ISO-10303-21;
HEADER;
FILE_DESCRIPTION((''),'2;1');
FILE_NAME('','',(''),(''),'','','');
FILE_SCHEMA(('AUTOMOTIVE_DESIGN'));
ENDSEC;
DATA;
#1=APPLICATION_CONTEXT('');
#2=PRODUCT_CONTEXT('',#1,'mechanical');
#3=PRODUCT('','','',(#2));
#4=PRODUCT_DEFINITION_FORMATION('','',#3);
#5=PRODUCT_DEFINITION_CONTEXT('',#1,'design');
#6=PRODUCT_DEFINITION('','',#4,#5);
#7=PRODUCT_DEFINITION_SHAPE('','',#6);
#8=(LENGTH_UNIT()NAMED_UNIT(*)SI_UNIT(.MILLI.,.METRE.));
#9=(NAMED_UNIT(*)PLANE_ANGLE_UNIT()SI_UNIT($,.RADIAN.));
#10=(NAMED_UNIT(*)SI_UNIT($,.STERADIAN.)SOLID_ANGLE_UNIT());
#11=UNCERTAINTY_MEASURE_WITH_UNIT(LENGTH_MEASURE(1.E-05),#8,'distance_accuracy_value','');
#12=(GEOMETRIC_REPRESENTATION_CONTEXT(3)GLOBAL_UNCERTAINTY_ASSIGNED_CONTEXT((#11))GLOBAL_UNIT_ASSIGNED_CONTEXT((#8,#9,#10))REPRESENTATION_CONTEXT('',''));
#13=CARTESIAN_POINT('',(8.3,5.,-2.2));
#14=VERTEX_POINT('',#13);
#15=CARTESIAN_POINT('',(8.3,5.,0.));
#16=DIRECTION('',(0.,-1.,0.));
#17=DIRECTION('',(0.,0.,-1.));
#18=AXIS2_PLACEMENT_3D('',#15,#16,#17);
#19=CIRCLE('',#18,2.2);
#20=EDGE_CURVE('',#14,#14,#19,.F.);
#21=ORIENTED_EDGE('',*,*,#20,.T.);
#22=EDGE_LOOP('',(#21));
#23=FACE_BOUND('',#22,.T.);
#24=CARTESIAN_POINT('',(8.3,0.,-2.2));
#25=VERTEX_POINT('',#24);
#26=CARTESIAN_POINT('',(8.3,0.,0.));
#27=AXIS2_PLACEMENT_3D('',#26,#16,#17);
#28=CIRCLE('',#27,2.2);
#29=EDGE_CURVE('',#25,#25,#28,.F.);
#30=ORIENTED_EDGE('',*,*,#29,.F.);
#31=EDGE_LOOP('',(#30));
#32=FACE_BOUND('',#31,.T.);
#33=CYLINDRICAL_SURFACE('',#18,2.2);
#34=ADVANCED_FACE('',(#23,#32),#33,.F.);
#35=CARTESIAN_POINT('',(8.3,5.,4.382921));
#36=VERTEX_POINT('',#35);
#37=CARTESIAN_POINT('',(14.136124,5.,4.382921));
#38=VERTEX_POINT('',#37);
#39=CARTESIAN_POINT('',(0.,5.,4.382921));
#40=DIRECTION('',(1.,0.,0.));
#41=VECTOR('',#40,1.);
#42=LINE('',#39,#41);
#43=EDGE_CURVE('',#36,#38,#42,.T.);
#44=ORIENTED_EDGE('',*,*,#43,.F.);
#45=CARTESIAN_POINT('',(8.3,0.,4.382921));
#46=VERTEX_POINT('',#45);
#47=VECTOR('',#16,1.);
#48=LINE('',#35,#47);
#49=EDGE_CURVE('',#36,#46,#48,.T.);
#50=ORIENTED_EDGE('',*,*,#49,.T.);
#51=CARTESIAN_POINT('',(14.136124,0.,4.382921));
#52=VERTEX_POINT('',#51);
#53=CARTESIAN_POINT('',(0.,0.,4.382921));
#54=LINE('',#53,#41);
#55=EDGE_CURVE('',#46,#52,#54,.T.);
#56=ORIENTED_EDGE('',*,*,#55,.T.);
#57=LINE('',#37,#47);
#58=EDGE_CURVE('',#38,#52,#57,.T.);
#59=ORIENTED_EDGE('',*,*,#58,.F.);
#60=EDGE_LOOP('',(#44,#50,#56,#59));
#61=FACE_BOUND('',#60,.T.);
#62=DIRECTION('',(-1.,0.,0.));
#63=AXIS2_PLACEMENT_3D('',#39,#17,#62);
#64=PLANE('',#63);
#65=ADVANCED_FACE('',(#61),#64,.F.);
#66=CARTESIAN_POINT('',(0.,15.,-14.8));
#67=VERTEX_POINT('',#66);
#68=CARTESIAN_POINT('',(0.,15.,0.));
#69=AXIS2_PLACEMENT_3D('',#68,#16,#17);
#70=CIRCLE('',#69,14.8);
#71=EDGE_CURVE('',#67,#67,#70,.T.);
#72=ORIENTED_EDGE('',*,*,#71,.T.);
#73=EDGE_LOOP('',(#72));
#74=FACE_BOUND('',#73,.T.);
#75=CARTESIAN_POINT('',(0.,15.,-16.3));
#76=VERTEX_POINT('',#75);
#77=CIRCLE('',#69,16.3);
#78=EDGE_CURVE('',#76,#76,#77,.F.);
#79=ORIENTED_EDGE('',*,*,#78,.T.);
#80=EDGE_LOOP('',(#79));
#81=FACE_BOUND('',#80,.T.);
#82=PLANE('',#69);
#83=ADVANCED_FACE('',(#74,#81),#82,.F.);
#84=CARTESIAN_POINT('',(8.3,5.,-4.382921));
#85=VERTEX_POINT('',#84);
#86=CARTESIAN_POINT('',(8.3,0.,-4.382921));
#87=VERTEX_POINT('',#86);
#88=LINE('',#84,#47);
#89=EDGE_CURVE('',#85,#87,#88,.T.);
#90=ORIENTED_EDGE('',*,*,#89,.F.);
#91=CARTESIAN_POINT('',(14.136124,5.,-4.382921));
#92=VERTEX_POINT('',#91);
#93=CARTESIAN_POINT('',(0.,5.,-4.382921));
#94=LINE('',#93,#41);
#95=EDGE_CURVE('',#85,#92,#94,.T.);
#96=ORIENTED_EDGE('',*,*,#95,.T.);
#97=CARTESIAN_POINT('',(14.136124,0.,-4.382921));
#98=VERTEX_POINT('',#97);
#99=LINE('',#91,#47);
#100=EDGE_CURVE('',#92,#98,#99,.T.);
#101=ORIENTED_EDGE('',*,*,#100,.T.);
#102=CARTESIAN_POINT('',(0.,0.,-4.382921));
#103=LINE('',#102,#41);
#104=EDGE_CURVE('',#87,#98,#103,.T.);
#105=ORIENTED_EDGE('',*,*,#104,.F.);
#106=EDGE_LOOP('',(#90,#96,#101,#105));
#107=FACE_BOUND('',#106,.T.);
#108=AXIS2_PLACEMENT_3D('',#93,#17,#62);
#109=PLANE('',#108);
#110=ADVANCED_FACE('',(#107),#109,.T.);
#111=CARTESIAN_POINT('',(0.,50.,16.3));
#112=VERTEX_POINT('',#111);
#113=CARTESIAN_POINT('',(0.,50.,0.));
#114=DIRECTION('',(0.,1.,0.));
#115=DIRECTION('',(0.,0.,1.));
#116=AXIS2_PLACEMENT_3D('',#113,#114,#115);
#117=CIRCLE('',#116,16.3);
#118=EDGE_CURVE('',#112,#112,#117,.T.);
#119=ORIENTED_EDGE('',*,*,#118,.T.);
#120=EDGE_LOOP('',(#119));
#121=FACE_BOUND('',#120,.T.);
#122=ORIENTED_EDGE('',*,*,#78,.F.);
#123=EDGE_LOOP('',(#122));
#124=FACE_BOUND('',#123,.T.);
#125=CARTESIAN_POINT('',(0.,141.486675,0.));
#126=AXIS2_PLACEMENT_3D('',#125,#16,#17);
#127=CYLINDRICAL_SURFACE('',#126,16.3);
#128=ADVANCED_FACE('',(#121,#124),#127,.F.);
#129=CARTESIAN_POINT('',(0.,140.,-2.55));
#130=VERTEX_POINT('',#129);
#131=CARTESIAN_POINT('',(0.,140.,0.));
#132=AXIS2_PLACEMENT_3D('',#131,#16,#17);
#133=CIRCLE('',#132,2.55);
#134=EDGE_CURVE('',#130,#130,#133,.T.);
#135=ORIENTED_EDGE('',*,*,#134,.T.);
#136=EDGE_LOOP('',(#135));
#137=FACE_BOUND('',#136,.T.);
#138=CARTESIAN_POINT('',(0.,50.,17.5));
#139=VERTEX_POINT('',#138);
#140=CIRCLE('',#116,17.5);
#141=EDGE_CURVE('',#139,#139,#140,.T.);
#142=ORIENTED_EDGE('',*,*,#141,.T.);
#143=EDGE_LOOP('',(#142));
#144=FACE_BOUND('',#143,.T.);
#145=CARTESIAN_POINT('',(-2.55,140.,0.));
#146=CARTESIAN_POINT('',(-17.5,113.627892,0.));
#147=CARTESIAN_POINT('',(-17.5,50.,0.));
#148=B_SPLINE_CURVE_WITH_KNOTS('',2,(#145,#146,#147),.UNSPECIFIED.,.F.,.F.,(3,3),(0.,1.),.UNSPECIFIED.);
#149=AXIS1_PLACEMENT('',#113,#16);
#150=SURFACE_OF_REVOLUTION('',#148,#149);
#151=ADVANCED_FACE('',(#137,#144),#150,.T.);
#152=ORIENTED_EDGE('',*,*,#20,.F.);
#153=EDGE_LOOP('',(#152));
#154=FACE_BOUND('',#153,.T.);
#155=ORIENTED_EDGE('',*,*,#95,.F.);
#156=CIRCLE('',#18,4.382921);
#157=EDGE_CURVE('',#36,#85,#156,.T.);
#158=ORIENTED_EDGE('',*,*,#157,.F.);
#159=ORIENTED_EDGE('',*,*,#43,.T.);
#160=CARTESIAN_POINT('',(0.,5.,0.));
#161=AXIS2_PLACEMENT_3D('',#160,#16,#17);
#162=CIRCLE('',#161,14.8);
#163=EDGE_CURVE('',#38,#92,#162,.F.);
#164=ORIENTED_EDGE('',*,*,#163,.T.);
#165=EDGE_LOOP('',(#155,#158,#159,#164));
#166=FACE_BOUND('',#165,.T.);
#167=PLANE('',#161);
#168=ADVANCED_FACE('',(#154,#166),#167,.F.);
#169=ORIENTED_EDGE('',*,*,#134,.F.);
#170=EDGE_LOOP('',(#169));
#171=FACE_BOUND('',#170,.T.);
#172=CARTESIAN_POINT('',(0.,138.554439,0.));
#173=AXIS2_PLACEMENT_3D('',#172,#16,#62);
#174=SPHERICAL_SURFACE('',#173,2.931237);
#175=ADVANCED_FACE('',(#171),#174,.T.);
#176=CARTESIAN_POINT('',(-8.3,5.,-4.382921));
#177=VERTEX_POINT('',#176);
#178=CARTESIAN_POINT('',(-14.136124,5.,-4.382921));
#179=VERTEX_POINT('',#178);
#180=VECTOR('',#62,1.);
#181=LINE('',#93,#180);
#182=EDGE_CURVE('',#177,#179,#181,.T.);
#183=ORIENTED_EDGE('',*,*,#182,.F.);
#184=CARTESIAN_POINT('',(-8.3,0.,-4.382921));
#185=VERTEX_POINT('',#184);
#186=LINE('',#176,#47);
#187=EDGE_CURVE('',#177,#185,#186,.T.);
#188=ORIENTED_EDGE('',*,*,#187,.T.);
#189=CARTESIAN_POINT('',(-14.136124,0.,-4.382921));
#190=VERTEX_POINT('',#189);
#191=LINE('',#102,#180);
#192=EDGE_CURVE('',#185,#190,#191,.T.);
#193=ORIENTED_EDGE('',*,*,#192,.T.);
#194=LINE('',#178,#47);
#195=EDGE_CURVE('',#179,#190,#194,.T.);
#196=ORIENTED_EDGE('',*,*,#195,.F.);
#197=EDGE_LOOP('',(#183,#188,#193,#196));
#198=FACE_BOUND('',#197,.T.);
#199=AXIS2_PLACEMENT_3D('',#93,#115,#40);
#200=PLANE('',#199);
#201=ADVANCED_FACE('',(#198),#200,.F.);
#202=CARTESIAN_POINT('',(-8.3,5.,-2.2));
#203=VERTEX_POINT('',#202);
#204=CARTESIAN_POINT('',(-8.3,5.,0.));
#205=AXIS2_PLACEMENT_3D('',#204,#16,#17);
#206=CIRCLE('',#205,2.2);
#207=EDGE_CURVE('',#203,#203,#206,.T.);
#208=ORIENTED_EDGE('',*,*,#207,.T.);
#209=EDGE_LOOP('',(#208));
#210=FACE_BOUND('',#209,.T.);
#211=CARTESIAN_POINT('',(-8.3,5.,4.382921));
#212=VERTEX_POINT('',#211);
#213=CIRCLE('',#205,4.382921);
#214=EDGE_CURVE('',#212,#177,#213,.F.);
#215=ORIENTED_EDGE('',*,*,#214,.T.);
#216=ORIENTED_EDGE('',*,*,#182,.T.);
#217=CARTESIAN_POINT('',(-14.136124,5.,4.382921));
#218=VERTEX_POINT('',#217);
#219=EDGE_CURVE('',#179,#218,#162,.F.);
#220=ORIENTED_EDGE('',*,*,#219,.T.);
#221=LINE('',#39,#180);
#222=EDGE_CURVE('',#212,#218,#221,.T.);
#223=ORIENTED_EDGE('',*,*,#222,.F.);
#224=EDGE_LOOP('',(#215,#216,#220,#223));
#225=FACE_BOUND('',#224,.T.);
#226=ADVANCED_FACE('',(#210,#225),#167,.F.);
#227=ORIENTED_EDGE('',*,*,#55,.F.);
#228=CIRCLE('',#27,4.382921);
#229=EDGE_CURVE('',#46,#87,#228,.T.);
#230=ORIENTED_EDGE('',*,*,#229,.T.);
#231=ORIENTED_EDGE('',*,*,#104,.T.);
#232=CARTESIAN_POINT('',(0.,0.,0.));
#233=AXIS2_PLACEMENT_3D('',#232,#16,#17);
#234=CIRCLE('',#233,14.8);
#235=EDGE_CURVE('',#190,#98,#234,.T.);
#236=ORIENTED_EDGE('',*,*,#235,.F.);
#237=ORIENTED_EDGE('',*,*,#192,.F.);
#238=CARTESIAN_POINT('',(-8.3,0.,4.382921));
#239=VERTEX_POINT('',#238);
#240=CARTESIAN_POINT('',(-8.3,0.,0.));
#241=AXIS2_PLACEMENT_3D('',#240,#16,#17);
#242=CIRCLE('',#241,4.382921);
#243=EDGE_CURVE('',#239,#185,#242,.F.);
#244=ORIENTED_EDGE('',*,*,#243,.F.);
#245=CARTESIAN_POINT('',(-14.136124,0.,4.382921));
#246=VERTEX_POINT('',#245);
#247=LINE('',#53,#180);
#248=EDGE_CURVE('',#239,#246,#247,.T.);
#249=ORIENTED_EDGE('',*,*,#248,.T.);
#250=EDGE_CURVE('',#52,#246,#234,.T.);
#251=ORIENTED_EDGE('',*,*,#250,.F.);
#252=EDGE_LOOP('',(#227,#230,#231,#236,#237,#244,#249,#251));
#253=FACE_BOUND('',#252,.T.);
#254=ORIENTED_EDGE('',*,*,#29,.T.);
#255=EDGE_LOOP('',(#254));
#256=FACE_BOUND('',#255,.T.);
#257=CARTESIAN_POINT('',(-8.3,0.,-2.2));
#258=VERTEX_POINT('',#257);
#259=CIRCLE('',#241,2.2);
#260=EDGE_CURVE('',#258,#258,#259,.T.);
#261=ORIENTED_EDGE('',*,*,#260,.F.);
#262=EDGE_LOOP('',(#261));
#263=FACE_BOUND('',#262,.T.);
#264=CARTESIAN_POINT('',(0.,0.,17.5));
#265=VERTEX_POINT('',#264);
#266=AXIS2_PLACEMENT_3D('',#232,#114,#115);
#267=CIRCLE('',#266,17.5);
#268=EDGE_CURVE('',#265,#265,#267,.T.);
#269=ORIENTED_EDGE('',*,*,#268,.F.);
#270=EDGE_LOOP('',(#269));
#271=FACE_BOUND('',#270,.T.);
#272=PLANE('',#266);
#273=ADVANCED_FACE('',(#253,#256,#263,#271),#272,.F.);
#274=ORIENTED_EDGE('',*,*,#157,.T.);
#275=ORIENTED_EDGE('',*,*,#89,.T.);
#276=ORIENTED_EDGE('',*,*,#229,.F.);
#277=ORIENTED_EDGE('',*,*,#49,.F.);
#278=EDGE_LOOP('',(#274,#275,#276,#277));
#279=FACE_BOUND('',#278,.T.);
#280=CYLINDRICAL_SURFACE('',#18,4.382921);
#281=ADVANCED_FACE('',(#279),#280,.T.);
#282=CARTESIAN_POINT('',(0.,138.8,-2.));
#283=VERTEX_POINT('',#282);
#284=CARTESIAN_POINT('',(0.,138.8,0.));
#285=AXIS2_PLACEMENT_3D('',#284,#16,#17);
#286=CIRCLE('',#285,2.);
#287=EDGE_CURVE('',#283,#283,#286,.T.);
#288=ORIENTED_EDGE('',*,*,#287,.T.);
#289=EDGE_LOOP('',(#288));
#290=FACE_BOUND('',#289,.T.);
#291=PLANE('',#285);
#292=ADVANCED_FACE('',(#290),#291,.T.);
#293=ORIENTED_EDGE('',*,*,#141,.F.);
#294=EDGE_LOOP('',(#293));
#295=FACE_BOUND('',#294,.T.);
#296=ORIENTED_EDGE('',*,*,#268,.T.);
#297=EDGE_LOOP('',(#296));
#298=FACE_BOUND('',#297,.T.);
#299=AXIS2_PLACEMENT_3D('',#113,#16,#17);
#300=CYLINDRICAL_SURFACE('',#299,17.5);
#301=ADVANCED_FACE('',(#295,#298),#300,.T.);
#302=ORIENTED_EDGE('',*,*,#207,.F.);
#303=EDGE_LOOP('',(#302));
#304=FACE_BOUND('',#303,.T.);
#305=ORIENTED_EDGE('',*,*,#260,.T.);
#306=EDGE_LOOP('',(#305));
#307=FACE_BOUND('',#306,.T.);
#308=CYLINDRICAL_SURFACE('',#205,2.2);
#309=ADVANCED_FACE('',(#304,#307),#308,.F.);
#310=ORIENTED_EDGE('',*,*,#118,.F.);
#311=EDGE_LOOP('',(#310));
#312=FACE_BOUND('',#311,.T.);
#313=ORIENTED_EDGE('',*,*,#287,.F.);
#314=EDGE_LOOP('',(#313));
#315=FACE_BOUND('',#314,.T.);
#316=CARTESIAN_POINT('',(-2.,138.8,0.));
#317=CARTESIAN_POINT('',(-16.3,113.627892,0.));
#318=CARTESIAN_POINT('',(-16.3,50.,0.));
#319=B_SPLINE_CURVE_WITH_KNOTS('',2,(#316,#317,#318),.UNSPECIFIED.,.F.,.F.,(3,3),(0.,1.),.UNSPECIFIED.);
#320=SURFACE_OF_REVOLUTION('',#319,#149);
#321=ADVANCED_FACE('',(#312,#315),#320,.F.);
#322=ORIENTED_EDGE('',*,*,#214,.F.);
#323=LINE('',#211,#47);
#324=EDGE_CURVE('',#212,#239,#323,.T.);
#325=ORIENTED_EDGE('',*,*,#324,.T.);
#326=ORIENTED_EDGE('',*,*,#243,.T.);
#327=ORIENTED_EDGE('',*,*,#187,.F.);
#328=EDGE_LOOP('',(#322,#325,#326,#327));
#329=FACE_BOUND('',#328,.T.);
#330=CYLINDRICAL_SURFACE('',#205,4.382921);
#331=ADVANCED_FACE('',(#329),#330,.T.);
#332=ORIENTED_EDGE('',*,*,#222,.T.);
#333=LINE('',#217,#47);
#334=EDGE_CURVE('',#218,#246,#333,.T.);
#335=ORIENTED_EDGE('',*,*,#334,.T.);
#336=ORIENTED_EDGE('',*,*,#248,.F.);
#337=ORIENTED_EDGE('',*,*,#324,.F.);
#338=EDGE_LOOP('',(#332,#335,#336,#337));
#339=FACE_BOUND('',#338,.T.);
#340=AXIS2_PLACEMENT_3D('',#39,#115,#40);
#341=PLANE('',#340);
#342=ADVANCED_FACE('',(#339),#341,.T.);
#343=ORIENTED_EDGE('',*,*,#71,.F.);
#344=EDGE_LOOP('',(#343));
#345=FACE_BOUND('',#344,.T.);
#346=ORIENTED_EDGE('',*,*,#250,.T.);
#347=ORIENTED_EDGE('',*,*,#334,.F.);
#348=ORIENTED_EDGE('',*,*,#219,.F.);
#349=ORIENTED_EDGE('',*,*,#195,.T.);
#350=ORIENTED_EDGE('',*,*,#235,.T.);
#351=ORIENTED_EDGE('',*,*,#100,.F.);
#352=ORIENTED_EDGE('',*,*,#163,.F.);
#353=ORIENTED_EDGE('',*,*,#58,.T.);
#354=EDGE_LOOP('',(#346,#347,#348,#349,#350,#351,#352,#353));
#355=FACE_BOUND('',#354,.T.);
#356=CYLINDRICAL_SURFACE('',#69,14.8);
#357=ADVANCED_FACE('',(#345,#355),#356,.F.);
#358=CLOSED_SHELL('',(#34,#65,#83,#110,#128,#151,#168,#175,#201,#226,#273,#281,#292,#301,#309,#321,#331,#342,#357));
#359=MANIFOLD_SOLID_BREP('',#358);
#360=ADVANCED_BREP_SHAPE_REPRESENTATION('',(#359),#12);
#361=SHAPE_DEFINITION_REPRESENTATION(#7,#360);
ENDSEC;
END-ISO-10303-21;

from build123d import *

# Parameters (mm, degrees)
SCHIZZO1_R                   = 17.5
ESTRUSIONE_ESTRUSIONE1_DEPTH = 50
TAGLIO_ESTRUSIONE1_REACH     = 145.634
SCHIZZO10_R                  = 16.3
SKETCH1_R                    = 16.3
SKETCH1_R_2                  = 14.8
BOSS_EXTRUDE3_DEPTH          = 15
SKETCH2_R                    = 2.2
BOSS_EXTRUDE4_DEPTH          = 5


# Read off the part's stored shape, not the designer's step: Rivoluzione1
with BuildPart() as part:
    # Schizzo1 → Estrusione-Estrusione1 (new body)
    with BuildSketch(Plane(origin=(0, 0, 0), x_dir=(1, 0, 0), z_dir=(0, 1, 0))):
        with Locations(Location((0, 0, 0), (0, 0, 270))):
            Circle(SCHIZZO1_R)
    extrude(amount=ESTRUSIONE_ESTRUSIONE1_DEPTH)

    # Rivoluzione1 outline → Rivoluzione1 (revolve)
    with BuildSketch(Plane.XY):
        with BuildLine():
            ThreePointArc((2.55, 139.999999998), (1.475612648, 141.087167398), (0, 141.485675179))
            Line((0, 141.485675179), (0, 138.8))
            Line((0, 138.8), (2, 138.8))
            add(Edge.make_bspline(
                [(2, 138.8), (16.3, 113.62789219), (16.3, 50)],
                knots=[0, 0, 0, 1, 1, 1], degree=2))
            Line((16.3, 50), (17.5, 50))
            add(Edge.make_bspline(
                [(17.5, 50), (17.5, 113.62789219), (2.55, 139.999999998)],
                knots=[0.022396988, 0.022396988, 0.022396988, 1.022396988, 1.022396988, 1.022396988], degree=2))
        make_face()
    revolve(axis=Axis((0, 0, 0), (0, 1, 0)))

    # Schizzo10 → Taglio-Estrusione1 (cut, up to next)
    with BuildSketch(Plane(origin=(0, 0, 0), x_dir=(1, 0, 0), z_dir=(0, 1, 0)), mode=Mode.PRIVATE) as taglio_estrusione1_sk1:
        with Locations(Location((0, 0, 0), (0, 0, 270))):
            Circle(SCHIZZO10_R)
    taglio_estrusione1_tool1 = extrude(taglio_estrusione1_sk1.sketch, amount=TAGLIO_ESTRUSIONE1_REACH, mode=Mode.PRIVATE) & part.part
    add(taglio_estrusione1_tool1.solids().sort_by_distance((0, 0, 0))[0], mode=Mode.SUBTRACT)

    # Sketch1 → Boss-Extrude3 (add)
    with BuildSketch(Plane.XZ):
        with Locations(Location((0, 0, 0), (0, 0, 270))):
            Circle(SKETCH1_R)
        with Locations(Location((0, 0, 0), (0, 0, 270))):
            Circle(SKETCH1_R_2, mode=Mode.SUBTRACT)
    extrude(amount=-BOSS_EXTRUDE3_DEPTH)

    # Sketch2 → Boss-Extrude4 (add)
    # profile 1 of 2: a face of its own
    with BuildSketch(Plane.XZ):
        with BuildLine():
            ThreePointArc((8.3, 4.3829214), (3.9170786, 0), (8.3, -4.3829214))
            Line((8.3, -4.3829214), (14.136123938, -4.3829214))
            ThreePointArc((14.136123938, -4.3829214), (14.8, 0), (14.136123938, 4.3829214))
            Line((14.136123938, 4.3829214), (8.3, 4.3829214))
        make_face()
        with Locations(Location((8.3, 0, 0), (0, 0, 270))):
            Circle(SKETCH2_R, mode=Mode.SUBTRACT)
    # profile 2 of 2: a face of its own
    with BuildSketch(Plane.XZ):
        with BuildLine():
            Line((-8.3, 4.3829214), (-14.136123938, 4.3829214))
            ThreePointArc((-14.136123938, 4.3829214), (-14.8, 0), (-14.136123938, -4.3829214))
            Line((-14.136123938, -4.3829214), (-8.3, -4.3829214))
            ThreePointArc((-8.3, -4.3829214), (-3.9170786, 0), (-8.3, 4.3829214))
        make_face()
        with Locations(Location((-8.3, 0, 0), (0, 0, 270))):
            Circle(SKETCH2_R, mode=Mode.SUBTRACT)
    extrude(amount=-BOSS_EXTRUDE4_DEPTH)


solid = part.part
